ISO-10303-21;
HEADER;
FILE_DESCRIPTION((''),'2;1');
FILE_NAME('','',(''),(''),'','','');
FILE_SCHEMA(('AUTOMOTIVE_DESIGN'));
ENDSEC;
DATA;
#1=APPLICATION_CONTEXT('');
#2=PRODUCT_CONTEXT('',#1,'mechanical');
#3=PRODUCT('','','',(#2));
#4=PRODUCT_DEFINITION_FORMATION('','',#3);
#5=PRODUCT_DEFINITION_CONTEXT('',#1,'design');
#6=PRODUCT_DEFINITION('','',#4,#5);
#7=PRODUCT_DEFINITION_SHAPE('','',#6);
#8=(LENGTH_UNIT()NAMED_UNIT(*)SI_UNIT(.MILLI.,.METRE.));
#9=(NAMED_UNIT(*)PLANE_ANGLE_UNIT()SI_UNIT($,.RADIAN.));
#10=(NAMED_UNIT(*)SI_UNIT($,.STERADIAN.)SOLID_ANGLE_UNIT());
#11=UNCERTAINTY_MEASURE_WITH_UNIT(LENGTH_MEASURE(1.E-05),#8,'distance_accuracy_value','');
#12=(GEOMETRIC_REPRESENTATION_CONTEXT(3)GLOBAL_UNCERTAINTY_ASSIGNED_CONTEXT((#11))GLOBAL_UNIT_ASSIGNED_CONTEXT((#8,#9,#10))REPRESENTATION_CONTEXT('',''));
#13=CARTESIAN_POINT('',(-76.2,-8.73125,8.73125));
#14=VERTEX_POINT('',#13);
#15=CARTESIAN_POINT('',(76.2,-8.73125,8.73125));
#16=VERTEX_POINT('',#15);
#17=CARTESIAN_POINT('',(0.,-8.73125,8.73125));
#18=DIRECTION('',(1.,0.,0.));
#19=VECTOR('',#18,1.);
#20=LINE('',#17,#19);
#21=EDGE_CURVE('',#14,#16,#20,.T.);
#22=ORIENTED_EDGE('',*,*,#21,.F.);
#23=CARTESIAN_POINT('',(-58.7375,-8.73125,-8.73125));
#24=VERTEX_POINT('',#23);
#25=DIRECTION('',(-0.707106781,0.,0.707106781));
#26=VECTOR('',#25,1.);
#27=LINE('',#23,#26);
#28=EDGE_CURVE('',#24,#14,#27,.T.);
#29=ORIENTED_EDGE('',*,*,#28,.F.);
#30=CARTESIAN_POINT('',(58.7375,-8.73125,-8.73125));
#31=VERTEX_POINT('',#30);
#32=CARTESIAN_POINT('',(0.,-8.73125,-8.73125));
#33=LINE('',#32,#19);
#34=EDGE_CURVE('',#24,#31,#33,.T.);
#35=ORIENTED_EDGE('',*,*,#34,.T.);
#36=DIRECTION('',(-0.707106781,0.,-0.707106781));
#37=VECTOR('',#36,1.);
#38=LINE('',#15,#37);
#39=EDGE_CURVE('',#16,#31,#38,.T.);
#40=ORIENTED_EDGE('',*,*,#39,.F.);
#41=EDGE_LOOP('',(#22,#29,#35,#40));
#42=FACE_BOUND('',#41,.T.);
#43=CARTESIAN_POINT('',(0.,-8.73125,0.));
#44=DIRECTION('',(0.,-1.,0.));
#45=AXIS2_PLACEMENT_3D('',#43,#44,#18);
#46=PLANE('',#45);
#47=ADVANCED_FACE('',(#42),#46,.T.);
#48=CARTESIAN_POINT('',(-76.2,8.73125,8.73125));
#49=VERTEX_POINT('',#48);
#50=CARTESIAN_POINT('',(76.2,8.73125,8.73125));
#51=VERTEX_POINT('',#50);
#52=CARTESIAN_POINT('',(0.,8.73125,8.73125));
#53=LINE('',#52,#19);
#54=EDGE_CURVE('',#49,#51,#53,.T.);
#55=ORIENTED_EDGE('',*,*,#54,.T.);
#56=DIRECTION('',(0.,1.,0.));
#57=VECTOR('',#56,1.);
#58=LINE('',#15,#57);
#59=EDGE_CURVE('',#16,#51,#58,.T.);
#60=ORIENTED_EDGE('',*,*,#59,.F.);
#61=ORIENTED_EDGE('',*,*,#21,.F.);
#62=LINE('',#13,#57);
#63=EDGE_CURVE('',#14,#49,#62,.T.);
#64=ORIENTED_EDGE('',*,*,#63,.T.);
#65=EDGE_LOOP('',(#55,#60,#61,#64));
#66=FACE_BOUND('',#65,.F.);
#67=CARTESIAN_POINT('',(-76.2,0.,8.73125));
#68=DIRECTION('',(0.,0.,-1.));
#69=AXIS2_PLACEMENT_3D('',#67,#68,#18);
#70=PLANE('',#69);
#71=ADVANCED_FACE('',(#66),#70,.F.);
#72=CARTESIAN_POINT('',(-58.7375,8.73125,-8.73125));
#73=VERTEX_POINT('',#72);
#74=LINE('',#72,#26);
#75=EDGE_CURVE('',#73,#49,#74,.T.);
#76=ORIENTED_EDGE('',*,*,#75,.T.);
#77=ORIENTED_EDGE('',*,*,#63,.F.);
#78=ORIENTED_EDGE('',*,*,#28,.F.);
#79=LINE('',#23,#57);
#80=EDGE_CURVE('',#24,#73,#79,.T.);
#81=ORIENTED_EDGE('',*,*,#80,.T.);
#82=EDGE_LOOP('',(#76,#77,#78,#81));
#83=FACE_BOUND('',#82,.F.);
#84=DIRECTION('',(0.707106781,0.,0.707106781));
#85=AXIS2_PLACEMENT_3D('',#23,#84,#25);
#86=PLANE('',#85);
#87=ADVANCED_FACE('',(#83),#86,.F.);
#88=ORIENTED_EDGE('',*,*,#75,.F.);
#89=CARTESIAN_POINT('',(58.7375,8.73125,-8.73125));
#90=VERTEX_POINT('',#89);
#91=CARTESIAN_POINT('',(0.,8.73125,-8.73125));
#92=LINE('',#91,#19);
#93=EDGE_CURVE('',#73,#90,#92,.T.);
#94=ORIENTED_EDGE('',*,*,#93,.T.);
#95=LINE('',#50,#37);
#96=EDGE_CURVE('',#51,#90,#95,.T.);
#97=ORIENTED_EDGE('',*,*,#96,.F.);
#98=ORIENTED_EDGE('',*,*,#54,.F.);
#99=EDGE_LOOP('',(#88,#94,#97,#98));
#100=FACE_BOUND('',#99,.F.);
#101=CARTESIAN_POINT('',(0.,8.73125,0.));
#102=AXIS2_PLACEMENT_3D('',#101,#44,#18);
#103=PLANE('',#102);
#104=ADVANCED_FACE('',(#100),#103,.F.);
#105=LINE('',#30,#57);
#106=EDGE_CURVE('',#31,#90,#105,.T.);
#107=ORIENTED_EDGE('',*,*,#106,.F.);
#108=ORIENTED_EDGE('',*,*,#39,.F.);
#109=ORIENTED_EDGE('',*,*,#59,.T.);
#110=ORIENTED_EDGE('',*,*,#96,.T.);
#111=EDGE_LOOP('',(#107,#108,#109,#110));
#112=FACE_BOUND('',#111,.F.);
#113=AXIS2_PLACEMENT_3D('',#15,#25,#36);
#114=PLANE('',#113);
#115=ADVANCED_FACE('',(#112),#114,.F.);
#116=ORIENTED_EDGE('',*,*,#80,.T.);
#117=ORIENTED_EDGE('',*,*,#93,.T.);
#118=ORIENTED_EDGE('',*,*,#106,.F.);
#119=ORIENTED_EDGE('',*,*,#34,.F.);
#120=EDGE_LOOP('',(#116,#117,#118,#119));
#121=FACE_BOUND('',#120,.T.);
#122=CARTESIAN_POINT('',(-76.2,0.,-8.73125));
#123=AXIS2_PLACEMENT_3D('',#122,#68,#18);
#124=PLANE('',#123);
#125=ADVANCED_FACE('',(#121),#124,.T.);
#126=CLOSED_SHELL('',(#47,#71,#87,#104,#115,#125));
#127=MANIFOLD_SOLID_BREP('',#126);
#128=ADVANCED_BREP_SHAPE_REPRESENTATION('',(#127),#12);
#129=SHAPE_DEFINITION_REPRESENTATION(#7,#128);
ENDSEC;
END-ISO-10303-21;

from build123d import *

# Parameters (mm, degrees)
F0_W     = 152.4
F0_H     = 17.4625
F1_DEPTH = 8.73125
F3_DEPTH = 17.4625
F4_DEPTH = 17.4625


# Not quite as in the source:
# - a length typed as a fraction of an inch, garbled in the dataset ("3 / 203.2 mm" for 3/8 in), is restored


with BuildPart() as f1:
    # F0 (on Front) → F1 (new body, symmetric)
    with BuildSketch(Plane.XZ):
        Rectangle(F0_W, F0_H)
    extrude(amount=F1_DEPTH, both=True)

    # F2 (on face) → F3 (cut)
    with BuildSketch(Plane.XZ.offset(8.73125)):
        Polygon((-58.7375, -8.73125), (-76.2, 8.73125), (-76.2, -8.73125), align=None)
    extrude(amount=-F3_DEPTH, mode=Mode.SUBTRACT)

    # F2 (on face) → F4 (cut)
    with BuildSketch(Plane.XZ.offset(8.73125)):
        Polygon((76.2, -8.73125), (76.2, 8.73125), (58.7375, -8.73125), align=None)
    extrude(amount=-F4_DEPTH, mode=Mode.SUBTRACT)


solid = f1.part
